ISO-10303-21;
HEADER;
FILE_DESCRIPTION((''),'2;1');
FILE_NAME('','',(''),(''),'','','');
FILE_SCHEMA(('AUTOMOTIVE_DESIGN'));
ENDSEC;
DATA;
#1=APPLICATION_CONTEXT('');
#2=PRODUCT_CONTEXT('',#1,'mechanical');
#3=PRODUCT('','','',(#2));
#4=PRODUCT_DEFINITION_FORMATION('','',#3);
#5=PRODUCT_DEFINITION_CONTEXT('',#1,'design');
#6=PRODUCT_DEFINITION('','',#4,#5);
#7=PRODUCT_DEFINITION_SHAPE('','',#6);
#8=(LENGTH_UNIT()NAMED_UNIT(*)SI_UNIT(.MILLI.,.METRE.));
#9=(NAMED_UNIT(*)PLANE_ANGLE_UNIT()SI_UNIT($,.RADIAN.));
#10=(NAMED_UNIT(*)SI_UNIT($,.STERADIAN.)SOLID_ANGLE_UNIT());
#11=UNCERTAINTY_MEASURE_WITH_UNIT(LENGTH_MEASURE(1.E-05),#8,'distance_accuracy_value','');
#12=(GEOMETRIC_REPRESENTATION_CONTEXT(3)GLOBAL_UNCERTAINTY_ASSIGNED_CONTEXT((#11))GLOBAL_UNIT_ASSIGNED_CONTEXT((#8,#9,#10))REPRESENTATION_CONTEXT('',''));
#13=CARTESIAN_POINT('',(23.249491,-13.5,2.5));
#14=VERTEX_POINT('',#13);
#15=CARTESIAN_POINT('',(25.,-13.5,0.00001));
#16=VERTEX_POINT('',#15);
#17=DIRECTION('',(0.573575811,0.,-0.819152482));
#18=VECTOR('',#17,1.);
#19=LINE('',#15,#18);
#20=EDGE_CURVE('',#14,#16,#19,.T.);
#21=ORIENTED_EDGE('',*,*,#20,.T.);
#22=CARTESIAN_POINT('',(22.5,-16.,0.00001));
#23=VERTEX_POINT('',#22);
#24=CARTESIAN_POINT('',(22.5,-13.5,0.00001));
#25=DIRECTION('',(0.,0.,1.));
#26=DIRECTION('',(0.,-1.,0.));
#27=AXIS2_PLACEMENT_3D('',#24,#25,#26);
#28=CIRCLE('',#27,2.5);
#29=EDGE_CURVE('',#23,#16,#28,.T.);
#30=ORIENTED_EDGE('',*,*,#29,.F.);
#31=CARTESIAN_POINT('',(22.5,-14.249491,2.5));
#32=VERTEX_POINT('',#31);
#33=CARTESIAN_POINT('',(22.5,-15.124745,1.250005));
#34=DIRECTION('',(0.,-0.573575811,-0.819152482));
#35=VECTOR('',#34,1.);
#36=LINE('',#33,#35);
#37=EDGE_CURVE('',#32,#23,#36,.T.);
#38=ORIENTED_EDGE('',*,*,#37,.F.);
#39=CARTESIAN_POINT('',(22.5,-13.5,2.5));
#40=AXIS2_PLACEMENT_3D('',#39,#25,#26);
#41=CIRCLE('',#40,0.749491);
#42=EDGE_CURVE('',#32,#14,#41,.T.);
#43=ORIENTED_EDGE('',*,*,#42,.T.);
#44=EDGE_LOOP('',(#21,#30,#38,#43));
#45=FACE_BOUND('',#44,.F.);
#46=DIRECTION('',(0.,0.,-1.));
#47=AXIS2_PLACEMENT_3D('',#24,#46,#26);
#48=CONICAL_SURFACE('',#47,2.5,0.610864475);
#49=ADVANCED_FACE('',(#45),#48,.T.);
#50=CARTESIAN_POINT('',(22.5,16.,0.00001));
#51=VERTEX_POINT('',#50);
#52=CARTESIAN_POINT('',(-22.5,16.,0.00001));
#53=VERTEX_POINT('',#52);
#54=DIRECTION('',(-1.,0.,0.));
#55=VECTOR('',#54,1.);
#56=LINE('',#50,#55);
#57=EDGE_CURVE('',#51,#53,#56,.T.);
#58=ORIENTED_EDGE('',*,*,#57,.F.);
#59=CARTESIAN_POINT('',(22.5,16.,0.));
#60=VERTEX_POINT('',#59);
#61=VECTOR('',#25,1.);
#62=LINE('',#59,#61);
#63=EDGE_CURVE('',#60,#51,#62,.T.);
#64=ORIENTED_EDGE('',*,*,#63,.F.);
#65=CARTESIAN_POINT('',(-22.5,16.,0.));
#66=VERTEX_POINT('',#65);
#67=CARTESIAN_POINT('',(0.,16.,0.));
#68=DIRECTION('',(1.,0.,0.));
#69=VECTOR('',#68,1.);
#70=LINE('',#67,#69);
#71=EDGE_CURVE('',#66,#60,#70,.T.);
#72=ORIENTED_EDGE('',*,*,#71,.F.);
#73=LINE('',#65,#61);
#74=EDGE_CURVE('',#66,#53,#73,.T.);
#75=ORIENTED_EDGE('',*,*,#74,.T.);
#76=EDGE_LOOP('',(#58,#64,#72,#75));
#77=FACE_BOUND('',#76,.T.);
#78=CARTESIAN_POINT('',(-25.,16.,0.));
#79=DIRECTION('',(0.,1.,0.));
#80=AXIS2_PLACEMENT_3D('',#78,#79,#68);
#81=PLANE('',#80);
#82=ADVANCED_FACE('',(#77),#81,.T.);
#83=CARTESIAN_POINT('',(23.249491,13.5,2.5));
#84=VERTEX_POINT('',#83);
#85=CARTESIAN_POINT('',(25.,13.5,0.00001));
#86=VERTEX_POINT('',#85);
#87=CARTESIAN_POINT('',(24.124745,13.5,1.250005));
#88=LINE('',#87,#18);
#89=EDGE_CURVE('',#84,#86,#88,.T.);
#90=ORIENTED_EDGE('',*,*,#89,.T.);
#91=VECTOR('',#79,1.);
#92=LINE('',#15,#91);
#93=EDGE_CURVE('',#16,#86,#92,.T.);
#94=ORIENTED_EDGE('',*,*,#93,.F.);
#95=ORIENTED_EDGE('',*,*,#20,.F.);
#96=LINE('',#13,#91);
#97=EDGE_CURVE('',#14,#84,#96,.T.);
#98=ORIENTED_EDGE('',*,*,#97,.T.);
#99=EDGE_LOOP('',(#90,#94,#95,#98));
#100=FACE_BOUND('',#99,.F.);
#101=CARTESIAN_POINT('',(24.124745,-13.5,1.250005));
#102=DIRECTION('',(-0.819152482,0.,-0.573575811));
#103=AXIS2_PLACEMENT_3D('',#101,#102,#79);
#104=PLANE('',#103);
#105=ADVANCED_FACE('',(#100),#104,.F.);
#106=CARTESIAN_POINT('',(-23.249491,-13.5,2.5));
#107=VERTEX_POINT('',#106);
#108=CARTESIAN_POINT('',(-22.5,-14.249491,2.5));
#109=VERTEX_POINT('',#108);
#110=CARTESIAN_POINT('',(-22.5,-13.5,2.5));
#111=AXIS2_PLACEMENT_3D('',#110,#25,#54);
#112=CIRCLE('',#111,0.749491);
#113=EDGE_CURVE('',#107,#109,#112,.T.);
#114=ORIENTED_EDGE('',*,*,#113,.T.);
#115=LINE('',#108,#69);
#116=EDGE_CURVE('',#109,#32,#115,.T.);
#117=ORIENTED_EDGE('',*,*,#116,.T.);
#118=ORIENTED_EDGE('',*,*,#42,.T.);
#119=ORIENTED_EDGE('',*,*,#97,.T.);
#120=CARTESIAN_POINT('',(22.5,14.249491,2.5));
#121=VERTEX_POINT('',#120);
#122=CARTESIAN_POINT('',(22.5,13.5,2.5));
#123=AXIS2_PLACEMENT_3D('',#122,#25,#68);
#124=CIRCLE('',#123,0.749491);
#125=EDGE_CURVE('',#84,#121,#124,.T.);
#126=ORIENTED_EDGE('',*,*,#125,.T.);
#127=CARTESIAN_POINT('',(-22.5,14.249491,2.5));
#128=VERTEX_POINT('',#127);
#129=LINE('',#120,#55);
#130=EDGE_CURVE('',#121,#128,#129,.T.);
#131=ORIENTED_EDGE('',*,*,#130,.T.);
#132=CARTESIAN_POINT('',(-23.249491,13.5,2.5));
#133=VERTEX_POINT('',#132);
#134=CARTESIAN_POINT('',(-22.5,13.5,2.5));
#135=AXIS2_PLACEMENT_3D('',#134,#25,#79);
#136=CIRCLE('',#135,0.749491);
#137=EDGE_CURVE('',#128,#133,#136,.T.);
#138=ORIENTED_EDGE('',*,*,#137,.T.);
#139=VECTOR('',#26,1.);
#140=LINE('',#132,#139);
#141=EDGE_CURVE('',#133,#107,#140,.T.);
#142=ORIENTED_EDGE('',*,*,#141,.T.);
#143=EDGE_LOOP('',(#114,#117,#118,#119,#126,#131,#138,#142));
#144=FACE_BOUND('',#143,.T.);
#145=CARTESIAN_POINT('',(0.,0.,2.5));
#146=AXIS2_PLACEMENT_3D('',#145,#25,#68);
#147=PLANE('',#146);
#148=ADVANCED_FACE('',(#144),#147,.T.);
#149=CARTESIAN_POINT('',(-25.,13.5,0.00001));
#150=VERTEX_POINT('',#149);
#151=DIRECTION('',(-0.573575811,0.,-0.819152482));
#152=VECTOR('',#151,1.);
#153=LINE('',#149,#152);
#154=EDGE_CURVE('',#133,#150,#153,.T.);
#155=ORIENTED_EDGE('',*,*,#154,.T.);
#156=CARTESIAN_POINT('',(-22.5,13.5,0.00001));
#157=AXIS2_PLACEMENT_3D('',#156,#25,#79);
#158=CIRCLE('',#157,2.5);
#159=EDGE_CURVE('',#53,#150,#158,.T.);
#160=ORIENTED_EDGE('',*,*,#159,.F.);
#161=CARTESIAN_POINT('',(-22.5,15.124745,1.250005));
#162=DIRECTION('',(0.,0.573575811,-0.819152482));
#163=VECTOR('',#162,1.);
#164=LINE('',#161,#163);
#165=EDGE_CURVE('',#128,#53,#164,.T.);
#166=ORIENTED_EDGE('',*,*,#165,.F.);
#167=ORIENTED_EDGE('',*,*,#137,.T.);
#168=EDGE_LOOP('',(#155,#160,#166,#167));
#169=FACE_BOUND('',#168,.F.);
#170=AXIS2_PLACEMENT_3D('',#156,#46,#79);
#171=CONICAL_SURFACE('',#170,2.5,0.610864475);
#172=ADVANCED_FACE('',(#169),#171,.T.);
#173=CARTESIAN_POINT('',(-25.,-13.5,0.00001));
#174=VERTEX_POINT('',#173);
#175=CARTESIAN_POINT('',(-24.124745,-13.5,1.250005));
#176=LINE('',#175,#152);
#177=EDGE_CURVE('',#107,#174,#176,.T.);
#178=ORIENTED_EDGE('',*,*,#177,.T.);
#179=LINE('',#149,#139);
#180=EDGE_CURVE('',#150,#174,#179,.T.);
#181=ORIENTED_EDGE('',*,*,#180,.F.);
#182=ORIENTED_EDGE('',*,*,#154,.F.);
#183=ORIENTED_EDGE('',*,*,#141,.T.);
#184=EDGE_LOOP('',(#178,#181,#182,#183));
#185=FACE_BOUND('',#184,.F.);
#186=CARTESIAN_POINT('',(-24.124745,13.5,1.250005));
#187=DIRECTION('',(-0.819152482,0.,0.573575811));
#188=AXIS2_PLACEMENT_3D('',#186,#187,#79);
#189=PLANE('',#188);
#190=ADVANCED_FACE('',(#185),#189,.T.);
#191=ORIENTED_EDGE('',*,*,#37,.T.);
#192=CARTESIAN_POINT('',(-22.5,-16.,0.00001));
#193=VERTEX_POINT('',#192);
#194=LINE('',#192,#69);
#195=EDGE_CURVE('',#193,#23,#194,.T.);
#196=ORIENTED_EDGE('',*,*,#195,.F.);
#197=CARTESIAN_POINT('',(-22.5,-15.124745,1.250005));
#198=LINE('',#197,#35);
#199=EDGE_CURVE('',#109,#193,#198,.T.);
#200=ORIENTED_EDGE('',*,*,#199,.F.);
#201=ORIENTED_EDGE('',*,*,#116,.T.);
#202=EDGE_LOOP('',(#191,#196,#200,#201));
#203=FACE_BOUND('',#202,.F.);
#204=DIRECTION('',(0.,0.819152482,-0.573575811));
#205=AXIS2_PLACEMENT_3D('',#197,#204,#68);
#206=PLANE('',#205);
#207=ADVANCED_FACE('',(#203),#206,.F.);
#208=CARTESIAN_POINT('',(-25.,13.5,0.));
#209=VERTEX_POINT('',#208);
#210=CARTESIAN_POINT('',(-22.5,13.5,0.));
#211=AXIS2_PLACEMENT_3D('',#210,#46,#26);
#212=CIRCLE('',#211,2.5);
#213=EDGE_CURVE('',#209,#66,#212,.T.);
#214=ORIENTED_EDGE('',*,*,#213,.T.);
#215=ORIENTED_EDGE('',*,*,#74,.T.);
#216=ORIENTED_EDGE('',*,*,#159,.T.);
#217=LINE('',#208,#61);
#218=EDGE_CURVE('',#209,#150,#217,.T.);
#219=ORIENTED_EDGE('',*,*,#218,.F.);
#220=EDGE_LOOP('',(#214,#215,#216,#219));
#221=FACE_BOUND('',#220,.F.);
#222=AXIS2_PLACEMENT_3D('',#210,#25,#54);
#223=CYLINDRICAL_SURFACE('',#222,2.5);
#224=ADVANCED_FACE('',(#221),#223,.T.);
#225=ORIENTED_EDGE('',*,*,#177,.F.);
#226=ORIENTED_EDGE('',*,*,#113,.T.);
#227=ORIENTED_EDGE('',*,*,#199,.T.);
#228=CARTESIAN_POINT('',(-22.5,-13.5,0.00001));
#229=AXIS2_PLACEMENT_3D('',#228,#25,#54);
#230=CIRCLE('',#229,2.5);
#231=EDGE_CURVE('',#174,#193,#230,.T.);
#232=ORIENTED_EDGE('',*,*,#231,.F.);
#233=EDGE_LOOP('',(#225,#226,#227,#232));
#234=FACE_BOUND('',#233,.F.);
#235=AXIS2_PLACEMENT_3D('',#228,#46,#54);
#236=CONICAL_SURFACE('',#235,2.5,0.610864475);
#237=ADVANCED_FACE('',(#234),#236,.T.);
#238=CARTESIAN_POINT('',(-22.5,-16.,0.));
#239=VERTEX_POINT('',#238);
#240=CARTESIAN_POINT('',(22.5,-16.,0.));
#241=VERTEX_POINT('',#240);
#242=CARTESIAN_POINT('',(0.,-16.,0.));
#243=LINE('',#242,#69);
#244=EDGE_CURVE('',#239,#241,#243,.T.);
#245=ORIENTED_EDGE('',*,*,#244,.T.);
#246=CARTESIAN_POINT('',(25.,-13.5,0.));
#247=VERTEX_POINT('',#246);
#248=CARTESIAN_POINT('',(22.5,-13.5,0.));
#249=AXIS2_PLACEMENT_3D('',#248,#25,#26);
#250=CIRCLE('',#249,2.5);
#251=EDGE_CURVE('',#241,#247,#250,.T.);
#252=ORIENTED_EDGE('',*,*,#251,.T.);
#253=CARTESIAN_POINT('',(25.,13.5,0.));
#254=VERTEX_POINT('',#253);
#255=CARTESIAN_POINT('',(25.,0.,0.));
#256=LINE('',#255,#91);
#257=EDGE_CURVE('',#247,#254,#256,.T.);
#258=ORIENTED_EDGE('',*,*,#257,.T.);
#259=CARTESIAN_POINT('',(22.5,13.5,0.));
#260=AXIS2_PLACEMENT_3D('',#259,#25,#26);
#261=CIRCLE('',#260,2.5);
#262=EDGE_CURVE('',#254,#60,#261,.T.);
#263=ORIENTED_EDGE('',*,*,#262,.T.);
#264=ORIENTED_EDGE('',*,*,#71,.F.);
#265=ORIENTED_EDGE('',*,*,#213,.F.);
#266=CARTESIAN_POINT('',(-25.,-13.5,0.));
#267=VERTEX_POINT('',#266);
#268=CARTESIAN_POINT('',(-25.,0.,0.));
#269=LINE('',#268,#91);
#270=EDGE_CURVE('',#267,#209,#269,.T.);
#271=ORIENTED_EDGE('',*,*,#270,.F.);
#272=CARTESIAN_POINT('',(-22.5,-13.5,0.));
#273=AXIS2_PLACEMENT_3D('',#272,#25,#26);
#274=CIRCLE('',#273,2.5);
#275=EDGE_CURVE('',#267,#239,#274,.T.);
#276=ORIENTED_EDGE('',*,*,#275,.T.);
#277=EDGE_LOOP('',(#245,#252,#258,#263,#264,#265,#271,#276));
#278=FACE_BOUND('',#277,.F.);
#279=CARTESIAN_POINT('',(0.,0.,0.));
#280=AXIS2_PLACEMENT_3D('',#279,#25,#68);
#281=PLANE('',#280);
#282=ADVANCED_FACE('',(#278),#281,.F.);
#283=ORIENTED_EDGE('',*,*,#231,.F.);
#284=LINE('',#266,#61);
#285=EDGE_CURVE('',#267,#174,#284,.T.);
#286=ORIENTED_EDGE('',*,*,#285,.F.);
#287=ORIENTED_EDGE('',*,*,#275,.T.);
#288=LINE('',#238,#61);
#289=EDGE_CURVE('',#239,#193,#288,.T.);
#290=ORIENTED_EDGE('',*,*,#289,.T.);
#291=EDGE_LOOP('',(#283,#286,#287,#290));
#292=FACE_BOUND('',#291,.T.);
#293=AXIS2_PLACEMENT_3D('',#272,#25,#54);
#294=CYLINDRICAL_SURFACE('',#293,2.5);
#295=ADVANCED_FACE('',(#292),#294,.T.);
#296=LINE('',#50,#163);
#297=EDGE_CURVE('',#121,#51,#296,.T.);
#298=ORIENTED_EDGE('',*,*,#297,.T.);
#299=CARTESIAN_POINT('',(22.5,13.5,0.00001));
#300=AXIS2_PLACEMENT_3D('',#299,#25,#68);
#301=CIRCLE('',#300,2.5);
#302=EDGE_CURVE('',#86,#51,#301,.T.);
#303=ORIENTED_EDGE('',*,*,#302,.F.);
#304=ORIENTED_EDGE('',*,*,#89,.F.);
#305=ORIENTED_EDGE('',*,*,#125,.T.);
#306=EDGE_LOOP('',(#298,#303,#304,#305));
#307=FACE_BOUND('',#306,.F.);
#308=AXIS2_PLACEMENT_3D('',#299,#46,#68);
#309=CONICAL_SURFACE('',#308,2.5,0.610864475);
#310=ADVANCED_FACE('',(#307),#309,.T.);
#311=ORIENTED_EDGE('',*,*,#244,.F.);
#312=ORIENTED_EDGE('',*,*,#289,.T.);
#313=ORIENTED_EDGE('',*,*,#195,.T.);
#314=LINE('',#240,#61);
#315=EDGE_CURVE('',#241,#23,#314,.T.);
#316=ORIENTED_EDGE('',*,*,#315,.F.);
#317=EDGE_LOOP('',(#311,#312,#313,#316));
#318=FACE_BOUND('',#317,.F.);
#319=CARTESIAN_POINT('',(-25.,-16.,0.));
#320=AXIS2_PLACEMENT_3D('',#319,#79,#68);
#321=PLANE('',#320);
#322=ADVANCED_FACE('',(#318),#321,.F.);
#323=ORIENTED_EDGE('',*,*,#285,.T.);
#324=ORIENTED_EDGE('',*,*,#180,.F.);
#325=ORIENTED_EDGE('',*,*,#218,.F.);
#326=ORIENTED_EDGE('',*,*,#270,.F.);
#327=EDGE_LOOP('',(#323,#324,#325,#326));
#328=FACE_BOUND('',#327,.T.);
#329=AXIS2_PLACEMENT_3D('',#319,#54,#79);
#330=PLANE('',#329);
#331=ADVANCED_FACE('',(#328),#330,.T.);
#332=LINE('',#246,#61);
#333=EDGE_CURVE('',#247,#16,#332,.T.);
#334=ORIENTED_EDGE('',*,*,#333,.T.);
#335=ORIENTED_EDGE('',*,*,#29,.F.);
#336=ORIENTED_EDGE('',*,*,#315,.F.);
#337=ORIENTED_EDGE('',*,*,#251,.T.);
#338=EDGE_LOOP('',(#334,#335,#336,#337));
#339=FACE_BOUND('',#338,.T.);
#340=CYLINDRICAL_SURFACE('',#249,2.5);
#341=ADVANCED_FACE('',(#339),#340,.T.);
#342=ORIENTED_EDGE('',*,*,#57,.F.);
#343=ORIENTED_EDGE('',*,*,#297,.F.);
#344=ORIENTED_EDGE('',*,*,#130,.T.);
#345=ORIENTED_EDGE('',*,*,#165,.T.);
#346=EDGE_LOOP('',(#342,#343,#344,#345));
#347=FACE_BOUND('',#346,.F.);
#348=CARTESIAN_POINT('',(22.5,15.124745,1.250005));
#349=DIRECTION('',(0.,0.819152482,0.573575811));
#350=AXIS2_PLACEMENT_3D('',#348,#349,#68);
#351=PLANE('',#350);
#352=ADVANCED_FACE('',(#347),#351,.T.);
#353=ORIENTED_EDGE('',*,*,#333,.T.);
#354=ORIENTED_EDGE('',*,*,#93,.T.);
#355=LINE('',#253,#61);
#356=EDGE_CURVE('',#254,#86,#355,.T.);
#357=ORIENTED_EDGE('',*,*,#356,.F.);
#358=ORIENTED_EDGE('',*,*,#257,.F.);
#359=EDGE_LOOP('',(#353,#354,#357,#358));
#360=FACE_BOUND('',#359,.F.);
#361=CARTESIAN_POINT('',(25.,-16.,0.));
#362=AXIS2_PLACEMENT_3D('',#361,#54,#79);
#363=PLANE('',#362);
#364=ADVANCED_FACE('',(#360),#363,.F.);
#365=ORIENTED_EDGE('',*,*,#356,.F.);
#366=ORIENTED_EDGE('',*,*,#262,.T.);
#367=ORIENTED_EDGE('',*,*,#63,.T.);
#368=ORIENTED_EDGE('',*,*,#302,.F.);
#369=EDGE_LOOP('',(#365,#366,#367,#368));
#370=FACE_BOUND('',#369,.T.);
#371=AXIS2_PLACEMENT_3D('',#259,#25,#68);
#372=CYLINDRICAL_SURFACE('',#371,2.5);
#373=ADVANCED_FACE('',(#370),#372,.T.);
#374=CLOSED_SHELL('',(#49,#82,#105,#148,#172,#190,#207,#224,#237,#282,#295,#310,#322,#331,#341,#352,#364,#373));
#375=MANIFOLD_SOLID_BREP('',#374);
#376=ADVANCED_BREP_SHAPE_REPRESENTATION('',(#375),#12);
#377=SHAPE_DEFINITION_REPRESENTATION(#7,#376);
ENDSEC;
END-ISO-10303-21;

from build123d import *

# Parameters (mm, degrees)
F0_W     = 50
F0_H     = 32
F1_DEPTH = 2.5
F2_R     = 2.5
F3_SIZE2 = 2.49999
F3_SIZE  = 1.750509


# Not quite as in the source:
# - a fillet or chamfer is up to 0.001 mm smaller than in the source, because OpenCascade refuses the exact size


with BuildPart() as f1:
    # F0 (on Top) → F1 (new body)
    with BuildSketch(Plane.XY):
        Rectangle(F0_W, F0_H)
    extrude(amount=F1_DEPTH)

    # F2
    f2_edges = [f1.edges().sort_by_distance(p)[0] for p in [
        (-25, -16, 1.25),
        (25, -16, 1.25),
        (25, 16, 1.25),
        (-25, 16, 1.25),
    ]]
    fillet(f2_edges, radius=F2_R)

    # F3 (size 1.7505188455 and 2.5 in the source; OpenCascade refuses exactly that, so slightly less here)
    f3_edges = [f1.edges().sort_by_distance(p)[0] for p in [
        (0, -16, 2.5),
        (-24.267767, -15.267767, 2.5),
        (-25, 0, 2.5),
        (-24.267767, 15.267767, 2.5),
        (0, 16, 2.5),
        (24.267767, 15.267767, 2.5),
        (25, 0, 2.5),
        (24.267767, -15.267767, 2.5),
    ]]
    f3_side = f1.faces().sort_by_distance((0, 0, 2.5))[0]
    chamfer(f3_edges, length=F3_SIZE, length2=F3_SIZE2, reference=f3_side)


solid = f1.part
